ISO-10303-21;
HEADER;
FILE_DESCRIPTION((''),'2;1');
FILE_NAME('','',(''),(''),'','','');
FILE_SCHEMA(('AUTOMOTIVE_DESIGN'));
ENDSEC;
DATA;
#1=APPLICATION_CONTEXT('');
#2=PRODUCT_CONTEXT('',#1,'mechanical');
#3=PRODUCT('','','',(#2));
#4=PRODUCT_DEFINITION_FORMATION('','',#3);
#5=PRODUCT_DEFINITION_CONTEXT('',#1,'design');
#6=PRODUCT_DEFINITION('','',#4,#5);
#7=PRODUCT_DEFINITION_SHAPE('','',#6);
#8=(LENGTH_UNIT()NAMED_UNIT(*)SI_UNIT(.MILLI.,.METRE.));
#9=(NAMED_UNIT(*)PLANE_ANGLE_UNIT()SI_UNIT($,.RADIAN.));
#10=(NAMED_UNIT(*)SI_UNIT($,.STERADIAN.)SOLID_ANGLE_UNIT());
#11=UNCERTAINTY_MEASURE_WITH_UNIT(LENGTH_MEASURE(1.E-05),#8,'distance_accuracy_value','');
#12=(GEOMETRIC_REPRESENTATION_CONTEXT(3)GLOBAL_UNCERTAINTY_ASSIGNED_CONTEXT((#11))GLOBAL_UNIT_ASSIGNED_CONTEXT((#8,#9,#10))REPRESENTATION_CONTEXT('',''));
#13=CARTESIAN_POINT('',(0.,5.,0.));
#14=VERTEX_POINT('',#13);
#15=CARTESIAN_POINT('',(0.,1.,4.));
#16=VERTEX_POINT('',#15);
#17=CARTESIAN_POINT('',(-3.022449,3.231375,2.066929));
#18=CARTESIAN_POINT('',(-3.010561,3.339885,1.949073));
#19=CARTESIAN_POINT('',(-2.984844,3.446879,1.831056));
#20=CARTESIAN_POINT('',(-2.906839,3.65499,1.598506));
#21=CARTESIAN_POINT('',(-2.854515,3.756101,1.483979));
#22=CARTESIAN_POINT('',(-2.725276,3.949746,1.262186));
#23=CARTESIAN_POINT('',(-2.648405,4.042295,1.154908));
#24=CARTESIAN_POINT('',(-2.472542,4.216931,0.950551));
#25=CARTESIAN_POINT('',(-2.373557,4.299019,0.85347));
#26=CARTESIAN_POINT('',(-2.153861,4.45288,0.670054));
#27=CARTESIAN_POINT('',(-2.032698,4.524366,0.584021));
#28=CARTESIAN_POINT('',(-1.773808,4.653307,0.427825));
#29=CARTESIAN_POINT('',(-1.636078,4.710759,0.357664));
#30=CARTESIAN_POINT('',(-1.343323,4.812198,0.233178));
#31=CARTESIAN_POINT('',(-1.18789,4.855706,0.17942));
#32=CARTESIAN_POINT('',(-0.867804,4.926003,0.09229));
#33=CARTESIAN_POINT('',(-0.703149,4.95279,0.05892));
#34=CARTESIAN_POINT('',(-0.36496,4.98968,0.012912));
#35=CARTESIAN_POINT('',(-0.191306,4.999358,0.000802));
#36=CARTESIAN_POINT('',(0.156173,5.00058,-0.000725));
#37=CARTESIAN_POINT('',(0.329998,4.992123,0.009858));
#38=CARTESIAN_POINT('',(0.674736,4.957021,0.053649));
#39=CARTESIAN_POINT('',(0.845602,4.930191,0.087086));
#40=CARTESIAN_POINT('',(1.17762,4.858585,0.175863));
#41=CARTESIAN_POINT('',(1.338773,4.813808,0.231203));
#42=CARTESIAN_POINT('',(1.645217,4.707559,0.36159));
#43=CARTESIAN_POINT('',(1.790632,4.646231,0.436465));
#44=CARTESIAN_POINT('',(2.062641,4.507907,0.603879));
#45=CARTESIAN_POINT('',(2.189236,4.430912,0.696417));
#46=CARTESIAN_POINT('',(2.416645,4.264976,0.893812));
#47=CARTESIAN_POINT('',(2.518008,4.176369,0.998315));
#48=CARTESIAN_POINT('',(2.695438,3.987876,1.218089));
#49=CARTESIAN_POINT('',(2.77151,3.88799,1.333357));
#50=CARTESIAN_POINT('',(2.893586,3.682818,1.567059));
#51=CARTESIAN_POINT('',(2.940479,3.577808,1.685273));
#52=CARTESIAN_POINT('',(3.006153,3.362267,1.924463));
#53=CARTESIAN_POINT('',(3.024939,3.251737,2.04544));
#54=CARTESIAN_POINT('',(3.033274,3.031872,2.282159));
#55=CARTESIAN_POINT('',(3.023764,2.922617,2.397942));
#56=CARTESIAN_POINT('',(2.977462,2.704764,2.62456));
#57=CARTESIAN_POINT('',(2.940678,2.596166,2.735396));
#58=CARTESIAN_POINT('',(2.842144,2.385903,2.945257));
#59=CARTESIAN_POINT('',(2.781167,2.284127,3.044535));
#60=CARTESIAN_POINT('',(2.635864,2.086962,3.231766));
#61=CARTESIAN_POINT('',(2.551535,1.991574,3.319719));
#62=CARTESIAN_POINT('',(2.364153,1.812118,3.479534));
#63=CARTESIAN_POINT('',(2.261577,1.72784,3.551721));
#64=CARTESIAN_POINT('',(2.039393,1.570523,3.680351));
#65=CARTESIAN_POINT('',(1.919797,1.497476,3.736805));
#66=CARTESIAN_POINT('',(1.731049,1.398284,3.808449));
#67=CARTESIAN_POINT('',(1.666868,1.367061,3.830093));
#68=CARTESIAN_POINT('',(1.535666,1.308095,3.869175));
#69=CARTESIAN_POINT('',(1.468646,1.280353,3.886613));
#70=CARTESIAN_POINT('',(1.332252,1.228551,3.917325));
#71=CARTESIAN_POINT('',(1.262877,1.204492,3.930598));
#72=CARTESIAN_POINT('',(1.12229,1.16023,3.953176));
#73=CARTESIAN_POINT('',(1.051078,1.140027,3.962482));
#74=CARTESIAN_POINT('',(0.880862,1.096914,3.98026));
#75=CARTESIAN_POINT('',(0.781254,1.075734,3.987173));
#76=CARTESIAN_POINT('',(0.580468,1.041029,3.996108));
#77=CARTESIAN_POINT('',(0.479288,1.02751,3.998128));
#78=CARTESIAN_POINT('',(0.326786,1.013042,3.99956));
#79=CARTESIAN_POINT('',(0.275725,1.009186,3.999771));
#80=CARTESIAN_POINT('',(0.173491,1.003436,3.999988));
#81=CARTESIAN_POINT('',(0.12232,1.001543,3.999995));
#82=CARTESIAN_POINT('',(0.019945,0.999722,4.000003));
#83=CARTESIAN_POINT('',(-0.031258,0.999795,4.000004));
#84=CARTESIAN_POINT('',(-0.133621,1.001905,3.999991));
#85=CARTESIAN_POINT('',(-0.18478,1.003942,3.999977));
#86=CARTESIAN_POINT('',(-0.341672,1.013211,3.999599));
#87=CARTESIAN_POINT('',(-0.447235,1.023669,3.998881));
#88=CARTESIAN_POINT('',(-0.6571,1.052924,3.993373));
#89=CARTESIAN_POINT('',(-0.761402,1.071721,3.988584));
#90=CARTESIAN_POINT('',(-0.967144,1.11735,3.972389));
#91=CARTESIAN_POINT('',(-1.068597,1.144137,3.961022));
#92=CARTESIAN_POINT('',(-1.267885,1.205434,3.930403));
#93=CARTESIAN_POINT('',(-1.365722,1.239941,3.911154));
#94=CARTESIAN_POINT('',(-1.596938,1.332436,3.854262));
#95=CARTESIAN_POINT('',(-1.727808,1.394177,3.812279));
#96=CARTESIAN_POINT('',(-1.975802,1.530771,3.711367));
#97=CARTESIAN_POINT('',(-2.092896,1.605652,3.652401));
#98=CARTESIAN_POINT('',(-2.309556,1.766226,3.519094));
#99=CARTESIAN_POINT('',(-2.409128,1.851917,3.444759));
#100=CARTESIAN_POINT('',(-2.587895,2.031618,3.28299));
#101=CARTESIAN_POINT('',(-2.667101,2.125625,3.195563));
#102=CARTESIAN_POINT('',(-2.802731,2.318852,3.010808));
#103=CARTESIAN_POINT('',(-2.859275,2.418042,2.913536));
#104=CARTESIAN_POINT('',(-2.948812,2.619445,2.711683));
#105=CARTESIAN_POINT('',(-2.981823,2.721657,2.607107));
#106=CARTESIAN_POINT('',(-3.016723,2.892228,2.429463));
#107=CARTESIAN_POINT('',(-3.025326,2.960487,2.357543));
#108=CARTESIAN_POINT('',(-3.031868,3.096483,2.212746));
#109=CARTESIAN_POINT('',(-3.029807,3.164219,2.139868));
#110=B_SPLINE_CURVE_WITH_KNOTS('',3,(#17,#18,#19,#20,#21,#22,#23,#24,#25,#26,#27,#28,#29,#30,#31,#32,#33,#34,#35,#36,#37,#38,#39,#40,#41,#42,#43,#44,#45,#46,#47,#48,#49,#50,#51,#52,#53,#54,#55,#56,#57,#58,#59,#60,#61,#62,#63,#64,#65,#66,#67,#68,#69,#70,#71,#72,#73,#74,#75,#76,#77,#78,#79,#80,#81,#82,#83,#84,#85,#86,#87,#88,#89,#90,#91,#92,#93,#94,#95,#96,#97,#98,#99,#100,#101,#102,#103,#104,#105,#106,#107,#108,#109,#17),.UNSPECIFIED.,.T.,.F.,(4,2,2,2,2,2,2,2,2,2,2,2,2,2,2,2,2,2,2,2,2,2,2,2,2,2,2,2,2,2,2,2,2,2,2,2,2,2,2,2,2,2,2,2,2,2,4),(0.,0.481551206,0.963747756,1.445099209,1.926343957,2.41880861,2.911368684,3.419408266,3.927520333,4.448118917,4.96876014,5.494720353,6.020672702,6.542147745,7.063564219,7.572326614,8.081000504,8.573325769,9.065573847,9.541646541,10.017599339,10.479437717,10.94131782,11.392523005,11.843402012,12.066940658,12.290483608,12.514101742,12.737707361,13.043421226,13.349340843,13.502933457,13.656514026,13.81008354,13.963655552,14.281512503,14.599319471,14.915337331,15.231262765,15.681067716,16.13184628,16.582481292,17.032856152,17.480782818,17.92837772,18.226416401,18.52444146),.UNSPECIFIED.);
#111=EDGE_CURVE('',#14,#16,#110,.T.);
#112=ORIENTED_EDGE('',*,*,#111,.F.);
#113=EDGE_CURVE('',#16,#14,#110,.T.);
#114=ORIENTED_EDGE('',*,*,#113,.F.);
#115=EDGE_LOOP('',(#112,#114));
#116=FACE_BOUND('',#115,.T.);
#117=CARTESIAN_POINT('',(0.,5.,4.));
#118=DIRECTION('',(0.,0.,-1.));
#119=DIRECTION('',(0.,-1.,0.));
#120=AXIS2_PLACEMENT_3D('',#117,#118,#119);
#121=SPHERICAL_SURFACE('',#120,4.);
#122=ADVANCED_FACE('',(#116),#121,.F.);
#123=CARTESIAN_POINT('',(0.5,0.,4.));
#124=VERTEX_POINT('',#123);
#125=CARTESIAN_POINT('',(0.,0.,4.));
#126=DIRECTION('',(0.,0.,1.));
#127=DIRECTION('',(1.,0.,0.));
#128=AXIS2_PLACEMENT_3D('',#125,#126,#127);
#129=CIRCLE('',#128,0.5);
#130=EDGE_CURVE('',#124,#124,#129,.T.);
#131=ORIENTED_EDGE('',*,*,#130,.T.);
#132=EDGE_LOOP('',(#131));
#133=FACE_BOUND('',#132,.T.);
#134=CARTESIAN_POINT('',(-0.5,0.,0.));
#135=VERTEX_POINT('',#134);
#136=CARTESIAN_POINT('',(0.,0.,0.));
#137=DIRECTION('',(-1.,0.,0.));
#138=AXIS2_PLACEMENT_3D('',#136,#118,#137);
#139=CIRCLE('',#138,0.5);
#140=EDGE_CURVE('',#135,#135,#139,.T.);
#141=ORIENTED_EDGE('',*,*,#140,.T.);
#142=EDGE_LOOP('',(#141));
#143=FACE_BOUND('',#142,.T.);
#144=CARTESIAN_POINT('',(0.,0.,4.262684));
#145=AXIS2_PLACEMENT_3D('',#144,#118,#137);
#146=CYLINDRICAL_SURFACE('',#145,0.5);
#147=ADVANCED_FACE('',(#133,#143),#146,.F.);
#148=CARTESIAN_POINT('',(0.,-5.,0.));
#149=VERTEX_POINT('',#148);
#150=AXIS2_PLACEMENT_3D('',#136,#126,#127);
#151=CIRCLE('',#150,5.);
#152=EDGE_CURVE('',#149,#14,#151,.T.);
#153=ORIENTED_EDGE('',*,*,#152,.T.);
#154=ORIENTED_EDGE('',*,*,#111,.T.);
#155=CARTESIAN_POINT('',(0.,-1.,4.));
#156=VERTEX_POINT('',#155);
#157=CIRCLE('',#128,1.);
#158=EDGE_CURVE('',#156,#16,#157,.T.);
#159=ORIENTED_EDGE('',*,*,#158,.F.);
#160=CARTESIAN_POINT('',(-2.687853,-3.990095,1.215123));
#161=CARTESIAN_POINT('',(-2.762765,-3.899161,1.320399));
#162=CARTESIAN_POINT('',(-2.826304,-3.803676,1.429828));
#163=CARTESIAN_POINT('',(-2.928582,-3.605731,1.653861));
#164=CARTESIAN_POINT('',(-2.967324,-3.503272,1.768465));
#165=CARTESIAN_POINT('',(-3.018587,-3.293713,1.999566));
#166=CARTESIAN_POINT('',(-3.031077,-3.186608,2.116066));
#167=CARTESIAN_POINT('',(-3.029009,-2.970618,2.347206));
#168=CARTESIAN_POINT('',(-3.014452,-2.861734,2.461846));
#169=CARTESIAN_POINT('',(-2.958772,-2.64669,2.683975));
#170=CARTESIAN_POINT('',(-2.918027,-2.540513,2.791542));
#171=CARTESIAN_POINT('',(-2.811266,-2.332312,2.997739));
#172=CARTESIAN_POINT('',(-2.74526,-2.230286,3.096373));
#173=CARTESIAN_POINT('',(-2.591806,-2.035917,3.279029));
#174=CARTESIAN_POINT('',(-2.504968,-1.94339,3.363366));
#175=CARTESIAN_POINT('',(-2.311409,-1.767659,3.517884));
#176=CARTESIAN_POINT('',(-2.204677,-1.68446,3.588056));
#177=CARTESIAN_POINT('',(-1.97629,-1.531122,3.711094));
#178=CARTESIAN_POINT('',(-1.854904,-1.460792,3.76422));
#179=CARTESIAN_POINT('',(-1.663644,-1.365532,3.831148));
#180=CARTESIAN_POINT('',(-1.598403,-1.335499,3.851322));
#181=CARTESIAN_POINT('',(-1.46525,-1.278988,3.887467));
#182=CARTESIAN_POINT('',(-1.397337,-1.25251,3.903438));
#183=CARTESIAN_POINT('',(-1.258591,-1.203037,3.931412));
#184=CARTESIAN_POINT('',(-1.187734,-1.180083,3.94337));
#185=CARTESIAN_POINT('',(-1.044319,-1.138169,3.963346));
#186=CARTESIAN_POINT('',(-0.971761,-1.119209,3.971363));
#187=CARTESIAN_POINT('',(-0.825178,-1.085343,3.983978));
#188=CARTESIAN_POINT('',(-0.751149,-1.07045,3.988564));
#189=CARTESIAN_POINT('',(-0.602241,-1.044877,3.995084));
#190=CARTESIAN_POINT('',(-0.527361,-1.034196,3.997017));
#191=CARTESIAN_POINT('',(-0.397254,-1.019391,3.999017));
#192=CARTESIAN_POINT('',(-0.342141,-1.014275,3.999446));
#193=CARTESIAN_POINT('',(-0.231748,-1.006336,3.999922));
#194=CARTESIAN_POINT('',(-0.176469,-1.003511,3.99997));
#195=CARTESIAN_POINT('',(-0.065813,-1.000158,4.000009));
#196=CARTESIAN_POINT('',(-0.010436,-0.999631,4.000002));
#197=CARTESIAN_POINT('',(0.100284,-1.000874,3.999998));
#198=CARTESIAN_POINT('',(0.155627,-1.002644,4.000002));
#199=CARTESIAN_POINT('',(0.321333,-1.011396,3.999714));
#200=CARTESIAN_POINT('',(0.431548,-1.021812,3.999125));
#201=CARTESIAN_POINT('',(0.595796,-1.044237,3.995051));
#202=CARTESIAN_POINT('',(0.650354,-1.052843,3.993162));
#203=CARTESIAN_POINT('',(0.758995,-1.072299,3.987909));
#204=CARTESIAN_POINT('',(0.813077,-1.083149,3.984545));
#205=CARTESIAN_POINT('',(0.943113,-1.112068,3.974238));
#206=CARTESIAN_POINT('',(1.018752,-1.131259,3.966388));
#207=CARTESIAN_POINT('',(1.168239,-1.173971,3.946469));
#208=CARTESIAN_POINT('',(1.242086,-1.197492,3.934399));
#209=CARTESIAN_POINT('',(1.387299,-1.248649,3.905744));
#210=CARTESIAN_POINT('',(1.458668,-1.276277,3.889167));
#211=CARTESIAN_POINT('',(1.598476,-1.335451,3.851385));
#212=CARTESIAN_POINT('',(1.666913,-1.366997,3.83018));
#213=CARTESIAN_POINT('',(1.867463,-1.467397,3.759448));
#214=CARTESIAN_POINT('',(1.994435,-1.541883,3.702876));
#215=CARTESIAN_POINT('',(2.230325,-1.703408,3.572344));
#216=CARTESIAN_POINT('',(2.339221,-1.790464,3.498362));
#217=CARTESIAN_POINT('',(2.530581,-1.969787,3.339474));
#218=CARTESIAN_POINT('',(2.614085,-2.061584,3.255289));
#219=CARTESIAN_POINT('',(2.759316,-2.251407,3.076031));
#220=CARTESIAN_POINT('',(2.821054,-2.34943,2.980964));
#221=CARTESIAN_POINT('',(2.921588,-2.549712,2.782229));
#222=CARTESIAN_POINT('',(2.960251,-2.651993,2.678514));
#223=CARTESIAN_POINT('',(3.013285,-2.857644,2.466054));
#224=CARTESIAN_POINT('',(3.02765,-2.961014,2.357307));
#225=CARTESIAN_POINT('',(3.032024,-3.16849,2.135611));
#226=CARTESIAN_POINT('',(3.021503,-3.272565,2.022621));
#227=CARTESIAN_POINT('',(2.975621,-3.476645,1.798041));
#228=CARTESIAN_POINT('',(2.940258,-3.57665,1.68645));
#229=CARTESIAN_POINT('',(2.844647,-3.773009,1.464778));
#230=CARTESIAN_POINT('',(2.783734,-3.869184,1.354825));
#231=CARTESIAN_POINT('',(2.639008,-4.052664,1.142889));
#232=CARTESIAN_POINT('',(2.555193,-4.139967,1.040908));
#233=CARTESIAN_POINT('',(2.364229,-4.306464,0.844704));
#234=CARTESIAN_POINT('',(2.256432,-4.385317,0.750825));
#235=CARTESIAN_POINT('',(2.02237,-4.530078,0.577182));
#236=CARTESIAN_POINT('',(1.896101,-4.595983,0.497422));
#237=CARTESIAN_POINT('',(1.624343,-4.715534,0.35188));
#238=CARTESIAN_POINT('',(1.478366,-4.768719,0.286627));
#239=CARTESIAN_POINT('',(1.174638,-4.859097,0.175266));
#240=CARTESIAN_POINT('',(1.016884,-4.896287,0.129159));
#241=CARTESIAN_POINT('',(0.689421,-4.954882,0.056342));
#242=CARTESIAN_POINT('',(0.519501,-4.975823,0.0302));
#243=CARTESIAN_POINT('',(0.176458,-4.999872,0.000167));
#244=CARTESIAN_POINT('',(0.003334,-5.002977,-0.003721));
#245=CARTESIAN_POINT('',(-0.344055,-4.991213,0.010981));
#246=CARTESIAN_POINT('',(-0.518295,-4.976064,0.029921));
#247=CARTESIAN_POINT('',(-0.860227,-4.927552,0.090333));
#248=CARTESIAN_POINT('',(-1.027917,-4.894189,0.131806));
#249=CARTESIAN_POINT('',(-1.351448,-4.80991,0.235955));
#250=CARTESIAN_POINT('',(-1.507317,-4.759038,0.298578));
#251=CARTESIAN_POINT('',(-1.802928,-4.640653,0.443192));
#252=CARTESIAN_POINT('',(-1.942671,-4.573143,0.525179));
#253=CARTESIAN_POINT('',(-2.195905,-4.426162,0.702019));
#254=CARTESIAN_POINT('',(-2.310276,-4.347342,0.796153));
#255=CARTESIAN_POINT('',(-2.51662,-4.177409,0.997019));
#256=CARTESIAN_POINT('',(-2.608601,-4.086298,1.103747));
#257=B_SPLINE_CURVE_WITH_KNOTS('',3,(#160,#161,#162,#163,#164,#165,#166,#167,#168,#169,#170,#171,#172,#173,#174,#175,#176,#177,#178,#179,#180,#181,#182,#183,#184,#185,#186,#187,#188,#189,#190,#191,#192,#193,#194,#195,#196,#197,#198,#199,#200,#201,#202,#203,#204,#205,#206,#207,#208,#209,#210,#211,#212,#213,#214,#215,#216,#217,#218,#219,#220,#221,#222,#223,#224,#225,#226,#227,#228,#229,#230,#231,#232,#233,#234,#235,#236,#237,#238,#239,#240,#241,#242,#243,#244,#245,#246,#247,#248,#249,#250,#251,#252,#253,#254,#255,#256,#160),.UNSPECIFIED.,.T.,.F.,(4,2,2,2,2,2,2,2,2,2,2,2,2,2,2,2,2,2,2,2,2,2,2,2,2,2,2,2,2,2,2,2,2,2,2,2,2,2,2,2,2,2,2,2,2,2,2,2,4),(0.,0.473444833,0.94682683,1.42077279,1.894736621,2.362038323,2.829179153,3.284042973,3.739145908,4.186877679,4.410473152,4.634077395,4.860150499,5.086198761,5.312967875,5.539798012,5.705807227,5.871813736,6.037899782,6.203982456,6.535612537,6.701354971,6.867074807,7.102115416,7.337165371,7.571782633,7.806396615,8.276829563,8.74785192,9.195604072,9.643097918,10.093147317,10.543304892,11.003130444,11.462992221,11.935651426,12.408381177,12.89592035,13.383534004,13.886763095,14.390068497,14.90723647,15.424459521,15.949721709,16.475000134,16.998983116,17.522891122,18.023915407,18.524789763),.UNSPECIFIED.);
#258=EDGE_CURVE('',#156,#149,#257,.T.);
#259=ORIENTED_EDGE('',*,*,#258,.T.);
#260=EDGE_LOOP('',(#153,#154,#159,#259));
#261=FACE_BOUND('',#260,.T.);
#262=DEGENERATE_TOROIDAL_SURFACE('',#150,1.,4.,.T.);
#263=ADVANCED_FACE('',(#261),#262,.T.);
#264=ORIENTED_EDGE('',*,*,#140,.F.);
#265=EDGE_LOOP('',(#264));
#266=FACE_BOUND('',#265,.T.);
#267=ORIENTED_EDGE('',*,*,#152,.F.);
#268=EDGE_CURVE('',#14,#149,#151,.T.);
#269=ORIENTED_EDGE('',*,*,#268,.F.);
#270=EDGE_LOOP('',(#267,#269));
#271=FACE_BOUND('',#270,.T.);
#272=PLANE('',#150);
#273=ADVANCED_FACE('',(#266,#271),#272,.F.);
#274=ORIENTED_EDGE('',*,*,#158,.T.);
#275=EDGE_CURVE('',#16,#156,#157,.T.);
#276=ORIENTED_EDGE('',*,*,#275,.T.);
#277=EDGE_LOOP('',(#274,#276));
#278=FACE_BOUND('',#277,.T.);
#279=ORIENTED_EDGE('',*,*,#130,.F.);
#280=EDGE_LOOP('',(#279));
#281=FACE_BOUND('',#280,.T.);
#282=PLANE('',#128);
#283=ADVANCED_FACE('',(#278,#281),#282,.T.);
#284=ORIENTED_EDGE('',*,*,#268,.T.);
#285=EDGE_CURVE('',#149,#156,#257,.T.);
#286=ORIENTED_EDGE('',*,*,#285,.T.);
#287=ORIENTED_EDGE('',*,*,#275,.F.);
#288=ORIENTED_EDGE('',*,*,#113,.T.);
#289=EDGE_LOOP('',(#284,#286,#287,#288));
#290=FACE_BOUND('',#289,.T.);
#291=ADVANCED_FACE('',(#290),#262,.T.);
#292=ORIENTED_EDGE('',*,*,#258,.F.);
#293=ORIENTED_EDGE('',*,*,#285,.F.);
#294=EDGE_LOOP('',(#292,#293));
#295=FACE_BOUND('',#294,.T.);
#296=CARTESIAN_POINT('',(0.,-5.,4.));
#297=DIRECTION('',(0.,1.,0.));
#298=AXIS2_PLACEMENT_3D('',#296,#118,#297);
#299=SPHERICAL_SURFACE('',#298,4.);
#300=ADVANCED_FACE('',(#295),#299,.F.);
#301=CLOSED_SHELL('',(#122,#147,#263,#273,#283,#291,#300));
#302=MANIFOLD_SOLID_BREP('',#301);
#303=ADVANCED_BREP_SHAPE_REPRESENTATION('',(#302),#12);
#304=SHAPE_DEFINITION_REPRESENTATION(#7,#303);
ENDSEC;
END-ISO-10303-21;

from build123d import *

# Parameters (mm, degrees)
SKETCH1_R           = 5
BOSS_EXTRUDE1_DEPTH = 4
FILLET1_R           = 4
SKETCH3_R           = 0.5
CUT_EXTRUDE1_DEPTH  = 9.124038577


with BuildPart() as part:
    # Sketch1 → Boss-Extrude1 (new body)
    with BuildSketch(Plane.XY):
        Circle(SKETCH1_R)
    extrude(amount=BOSS_EXTRUDE1_DEPTH)

    # Fillet1
    fillet1_edges = [part.edges().sort_by_distance(p)[0] for p in [
        (-5, 0, 4),
    ]]
    fillet(fillet1_edges, radius=FILLET1_R - 0.0001)  # a hair under: the kernel refuses the full size

    # Sketch2 → Cut-Revolve2 (revolve, cut)
    with BuildSketch(Plane(origin=(0, 0, 0), x_dir=(0, 0, -1), z_dir=(1, 0, 0))):
        with BuildLine():
            Line((0, 5), (-8, 5))
            ThreePointArc((-8, 5), (-4, 1), (0, 5))
        make_face()
    cut_revolve2 = revolve(axis=Axis((0, 5, 0), (0, 0, 1)), mode=Mode.SUBTRACT)

    # Mirror1: Cut-Revolve2 across plane
    add(cut_revolve2.mirror(Plane.ZX), mode=Mode.SUBTRACT)

    # Sketch3 → Cut-Extrude1 (cut, through all)
    with BuildSketch(Plane(origin=(0, 0, 0), x_dir=(-1, 0, 0), z_dir=(0, 0, -1))):
        Circle(SKETCH3_R)
    extrude(amount=-CUT_EXTRUDE1_DEPTH, mode=Mode.SUBTRACT)


solid = part.part
